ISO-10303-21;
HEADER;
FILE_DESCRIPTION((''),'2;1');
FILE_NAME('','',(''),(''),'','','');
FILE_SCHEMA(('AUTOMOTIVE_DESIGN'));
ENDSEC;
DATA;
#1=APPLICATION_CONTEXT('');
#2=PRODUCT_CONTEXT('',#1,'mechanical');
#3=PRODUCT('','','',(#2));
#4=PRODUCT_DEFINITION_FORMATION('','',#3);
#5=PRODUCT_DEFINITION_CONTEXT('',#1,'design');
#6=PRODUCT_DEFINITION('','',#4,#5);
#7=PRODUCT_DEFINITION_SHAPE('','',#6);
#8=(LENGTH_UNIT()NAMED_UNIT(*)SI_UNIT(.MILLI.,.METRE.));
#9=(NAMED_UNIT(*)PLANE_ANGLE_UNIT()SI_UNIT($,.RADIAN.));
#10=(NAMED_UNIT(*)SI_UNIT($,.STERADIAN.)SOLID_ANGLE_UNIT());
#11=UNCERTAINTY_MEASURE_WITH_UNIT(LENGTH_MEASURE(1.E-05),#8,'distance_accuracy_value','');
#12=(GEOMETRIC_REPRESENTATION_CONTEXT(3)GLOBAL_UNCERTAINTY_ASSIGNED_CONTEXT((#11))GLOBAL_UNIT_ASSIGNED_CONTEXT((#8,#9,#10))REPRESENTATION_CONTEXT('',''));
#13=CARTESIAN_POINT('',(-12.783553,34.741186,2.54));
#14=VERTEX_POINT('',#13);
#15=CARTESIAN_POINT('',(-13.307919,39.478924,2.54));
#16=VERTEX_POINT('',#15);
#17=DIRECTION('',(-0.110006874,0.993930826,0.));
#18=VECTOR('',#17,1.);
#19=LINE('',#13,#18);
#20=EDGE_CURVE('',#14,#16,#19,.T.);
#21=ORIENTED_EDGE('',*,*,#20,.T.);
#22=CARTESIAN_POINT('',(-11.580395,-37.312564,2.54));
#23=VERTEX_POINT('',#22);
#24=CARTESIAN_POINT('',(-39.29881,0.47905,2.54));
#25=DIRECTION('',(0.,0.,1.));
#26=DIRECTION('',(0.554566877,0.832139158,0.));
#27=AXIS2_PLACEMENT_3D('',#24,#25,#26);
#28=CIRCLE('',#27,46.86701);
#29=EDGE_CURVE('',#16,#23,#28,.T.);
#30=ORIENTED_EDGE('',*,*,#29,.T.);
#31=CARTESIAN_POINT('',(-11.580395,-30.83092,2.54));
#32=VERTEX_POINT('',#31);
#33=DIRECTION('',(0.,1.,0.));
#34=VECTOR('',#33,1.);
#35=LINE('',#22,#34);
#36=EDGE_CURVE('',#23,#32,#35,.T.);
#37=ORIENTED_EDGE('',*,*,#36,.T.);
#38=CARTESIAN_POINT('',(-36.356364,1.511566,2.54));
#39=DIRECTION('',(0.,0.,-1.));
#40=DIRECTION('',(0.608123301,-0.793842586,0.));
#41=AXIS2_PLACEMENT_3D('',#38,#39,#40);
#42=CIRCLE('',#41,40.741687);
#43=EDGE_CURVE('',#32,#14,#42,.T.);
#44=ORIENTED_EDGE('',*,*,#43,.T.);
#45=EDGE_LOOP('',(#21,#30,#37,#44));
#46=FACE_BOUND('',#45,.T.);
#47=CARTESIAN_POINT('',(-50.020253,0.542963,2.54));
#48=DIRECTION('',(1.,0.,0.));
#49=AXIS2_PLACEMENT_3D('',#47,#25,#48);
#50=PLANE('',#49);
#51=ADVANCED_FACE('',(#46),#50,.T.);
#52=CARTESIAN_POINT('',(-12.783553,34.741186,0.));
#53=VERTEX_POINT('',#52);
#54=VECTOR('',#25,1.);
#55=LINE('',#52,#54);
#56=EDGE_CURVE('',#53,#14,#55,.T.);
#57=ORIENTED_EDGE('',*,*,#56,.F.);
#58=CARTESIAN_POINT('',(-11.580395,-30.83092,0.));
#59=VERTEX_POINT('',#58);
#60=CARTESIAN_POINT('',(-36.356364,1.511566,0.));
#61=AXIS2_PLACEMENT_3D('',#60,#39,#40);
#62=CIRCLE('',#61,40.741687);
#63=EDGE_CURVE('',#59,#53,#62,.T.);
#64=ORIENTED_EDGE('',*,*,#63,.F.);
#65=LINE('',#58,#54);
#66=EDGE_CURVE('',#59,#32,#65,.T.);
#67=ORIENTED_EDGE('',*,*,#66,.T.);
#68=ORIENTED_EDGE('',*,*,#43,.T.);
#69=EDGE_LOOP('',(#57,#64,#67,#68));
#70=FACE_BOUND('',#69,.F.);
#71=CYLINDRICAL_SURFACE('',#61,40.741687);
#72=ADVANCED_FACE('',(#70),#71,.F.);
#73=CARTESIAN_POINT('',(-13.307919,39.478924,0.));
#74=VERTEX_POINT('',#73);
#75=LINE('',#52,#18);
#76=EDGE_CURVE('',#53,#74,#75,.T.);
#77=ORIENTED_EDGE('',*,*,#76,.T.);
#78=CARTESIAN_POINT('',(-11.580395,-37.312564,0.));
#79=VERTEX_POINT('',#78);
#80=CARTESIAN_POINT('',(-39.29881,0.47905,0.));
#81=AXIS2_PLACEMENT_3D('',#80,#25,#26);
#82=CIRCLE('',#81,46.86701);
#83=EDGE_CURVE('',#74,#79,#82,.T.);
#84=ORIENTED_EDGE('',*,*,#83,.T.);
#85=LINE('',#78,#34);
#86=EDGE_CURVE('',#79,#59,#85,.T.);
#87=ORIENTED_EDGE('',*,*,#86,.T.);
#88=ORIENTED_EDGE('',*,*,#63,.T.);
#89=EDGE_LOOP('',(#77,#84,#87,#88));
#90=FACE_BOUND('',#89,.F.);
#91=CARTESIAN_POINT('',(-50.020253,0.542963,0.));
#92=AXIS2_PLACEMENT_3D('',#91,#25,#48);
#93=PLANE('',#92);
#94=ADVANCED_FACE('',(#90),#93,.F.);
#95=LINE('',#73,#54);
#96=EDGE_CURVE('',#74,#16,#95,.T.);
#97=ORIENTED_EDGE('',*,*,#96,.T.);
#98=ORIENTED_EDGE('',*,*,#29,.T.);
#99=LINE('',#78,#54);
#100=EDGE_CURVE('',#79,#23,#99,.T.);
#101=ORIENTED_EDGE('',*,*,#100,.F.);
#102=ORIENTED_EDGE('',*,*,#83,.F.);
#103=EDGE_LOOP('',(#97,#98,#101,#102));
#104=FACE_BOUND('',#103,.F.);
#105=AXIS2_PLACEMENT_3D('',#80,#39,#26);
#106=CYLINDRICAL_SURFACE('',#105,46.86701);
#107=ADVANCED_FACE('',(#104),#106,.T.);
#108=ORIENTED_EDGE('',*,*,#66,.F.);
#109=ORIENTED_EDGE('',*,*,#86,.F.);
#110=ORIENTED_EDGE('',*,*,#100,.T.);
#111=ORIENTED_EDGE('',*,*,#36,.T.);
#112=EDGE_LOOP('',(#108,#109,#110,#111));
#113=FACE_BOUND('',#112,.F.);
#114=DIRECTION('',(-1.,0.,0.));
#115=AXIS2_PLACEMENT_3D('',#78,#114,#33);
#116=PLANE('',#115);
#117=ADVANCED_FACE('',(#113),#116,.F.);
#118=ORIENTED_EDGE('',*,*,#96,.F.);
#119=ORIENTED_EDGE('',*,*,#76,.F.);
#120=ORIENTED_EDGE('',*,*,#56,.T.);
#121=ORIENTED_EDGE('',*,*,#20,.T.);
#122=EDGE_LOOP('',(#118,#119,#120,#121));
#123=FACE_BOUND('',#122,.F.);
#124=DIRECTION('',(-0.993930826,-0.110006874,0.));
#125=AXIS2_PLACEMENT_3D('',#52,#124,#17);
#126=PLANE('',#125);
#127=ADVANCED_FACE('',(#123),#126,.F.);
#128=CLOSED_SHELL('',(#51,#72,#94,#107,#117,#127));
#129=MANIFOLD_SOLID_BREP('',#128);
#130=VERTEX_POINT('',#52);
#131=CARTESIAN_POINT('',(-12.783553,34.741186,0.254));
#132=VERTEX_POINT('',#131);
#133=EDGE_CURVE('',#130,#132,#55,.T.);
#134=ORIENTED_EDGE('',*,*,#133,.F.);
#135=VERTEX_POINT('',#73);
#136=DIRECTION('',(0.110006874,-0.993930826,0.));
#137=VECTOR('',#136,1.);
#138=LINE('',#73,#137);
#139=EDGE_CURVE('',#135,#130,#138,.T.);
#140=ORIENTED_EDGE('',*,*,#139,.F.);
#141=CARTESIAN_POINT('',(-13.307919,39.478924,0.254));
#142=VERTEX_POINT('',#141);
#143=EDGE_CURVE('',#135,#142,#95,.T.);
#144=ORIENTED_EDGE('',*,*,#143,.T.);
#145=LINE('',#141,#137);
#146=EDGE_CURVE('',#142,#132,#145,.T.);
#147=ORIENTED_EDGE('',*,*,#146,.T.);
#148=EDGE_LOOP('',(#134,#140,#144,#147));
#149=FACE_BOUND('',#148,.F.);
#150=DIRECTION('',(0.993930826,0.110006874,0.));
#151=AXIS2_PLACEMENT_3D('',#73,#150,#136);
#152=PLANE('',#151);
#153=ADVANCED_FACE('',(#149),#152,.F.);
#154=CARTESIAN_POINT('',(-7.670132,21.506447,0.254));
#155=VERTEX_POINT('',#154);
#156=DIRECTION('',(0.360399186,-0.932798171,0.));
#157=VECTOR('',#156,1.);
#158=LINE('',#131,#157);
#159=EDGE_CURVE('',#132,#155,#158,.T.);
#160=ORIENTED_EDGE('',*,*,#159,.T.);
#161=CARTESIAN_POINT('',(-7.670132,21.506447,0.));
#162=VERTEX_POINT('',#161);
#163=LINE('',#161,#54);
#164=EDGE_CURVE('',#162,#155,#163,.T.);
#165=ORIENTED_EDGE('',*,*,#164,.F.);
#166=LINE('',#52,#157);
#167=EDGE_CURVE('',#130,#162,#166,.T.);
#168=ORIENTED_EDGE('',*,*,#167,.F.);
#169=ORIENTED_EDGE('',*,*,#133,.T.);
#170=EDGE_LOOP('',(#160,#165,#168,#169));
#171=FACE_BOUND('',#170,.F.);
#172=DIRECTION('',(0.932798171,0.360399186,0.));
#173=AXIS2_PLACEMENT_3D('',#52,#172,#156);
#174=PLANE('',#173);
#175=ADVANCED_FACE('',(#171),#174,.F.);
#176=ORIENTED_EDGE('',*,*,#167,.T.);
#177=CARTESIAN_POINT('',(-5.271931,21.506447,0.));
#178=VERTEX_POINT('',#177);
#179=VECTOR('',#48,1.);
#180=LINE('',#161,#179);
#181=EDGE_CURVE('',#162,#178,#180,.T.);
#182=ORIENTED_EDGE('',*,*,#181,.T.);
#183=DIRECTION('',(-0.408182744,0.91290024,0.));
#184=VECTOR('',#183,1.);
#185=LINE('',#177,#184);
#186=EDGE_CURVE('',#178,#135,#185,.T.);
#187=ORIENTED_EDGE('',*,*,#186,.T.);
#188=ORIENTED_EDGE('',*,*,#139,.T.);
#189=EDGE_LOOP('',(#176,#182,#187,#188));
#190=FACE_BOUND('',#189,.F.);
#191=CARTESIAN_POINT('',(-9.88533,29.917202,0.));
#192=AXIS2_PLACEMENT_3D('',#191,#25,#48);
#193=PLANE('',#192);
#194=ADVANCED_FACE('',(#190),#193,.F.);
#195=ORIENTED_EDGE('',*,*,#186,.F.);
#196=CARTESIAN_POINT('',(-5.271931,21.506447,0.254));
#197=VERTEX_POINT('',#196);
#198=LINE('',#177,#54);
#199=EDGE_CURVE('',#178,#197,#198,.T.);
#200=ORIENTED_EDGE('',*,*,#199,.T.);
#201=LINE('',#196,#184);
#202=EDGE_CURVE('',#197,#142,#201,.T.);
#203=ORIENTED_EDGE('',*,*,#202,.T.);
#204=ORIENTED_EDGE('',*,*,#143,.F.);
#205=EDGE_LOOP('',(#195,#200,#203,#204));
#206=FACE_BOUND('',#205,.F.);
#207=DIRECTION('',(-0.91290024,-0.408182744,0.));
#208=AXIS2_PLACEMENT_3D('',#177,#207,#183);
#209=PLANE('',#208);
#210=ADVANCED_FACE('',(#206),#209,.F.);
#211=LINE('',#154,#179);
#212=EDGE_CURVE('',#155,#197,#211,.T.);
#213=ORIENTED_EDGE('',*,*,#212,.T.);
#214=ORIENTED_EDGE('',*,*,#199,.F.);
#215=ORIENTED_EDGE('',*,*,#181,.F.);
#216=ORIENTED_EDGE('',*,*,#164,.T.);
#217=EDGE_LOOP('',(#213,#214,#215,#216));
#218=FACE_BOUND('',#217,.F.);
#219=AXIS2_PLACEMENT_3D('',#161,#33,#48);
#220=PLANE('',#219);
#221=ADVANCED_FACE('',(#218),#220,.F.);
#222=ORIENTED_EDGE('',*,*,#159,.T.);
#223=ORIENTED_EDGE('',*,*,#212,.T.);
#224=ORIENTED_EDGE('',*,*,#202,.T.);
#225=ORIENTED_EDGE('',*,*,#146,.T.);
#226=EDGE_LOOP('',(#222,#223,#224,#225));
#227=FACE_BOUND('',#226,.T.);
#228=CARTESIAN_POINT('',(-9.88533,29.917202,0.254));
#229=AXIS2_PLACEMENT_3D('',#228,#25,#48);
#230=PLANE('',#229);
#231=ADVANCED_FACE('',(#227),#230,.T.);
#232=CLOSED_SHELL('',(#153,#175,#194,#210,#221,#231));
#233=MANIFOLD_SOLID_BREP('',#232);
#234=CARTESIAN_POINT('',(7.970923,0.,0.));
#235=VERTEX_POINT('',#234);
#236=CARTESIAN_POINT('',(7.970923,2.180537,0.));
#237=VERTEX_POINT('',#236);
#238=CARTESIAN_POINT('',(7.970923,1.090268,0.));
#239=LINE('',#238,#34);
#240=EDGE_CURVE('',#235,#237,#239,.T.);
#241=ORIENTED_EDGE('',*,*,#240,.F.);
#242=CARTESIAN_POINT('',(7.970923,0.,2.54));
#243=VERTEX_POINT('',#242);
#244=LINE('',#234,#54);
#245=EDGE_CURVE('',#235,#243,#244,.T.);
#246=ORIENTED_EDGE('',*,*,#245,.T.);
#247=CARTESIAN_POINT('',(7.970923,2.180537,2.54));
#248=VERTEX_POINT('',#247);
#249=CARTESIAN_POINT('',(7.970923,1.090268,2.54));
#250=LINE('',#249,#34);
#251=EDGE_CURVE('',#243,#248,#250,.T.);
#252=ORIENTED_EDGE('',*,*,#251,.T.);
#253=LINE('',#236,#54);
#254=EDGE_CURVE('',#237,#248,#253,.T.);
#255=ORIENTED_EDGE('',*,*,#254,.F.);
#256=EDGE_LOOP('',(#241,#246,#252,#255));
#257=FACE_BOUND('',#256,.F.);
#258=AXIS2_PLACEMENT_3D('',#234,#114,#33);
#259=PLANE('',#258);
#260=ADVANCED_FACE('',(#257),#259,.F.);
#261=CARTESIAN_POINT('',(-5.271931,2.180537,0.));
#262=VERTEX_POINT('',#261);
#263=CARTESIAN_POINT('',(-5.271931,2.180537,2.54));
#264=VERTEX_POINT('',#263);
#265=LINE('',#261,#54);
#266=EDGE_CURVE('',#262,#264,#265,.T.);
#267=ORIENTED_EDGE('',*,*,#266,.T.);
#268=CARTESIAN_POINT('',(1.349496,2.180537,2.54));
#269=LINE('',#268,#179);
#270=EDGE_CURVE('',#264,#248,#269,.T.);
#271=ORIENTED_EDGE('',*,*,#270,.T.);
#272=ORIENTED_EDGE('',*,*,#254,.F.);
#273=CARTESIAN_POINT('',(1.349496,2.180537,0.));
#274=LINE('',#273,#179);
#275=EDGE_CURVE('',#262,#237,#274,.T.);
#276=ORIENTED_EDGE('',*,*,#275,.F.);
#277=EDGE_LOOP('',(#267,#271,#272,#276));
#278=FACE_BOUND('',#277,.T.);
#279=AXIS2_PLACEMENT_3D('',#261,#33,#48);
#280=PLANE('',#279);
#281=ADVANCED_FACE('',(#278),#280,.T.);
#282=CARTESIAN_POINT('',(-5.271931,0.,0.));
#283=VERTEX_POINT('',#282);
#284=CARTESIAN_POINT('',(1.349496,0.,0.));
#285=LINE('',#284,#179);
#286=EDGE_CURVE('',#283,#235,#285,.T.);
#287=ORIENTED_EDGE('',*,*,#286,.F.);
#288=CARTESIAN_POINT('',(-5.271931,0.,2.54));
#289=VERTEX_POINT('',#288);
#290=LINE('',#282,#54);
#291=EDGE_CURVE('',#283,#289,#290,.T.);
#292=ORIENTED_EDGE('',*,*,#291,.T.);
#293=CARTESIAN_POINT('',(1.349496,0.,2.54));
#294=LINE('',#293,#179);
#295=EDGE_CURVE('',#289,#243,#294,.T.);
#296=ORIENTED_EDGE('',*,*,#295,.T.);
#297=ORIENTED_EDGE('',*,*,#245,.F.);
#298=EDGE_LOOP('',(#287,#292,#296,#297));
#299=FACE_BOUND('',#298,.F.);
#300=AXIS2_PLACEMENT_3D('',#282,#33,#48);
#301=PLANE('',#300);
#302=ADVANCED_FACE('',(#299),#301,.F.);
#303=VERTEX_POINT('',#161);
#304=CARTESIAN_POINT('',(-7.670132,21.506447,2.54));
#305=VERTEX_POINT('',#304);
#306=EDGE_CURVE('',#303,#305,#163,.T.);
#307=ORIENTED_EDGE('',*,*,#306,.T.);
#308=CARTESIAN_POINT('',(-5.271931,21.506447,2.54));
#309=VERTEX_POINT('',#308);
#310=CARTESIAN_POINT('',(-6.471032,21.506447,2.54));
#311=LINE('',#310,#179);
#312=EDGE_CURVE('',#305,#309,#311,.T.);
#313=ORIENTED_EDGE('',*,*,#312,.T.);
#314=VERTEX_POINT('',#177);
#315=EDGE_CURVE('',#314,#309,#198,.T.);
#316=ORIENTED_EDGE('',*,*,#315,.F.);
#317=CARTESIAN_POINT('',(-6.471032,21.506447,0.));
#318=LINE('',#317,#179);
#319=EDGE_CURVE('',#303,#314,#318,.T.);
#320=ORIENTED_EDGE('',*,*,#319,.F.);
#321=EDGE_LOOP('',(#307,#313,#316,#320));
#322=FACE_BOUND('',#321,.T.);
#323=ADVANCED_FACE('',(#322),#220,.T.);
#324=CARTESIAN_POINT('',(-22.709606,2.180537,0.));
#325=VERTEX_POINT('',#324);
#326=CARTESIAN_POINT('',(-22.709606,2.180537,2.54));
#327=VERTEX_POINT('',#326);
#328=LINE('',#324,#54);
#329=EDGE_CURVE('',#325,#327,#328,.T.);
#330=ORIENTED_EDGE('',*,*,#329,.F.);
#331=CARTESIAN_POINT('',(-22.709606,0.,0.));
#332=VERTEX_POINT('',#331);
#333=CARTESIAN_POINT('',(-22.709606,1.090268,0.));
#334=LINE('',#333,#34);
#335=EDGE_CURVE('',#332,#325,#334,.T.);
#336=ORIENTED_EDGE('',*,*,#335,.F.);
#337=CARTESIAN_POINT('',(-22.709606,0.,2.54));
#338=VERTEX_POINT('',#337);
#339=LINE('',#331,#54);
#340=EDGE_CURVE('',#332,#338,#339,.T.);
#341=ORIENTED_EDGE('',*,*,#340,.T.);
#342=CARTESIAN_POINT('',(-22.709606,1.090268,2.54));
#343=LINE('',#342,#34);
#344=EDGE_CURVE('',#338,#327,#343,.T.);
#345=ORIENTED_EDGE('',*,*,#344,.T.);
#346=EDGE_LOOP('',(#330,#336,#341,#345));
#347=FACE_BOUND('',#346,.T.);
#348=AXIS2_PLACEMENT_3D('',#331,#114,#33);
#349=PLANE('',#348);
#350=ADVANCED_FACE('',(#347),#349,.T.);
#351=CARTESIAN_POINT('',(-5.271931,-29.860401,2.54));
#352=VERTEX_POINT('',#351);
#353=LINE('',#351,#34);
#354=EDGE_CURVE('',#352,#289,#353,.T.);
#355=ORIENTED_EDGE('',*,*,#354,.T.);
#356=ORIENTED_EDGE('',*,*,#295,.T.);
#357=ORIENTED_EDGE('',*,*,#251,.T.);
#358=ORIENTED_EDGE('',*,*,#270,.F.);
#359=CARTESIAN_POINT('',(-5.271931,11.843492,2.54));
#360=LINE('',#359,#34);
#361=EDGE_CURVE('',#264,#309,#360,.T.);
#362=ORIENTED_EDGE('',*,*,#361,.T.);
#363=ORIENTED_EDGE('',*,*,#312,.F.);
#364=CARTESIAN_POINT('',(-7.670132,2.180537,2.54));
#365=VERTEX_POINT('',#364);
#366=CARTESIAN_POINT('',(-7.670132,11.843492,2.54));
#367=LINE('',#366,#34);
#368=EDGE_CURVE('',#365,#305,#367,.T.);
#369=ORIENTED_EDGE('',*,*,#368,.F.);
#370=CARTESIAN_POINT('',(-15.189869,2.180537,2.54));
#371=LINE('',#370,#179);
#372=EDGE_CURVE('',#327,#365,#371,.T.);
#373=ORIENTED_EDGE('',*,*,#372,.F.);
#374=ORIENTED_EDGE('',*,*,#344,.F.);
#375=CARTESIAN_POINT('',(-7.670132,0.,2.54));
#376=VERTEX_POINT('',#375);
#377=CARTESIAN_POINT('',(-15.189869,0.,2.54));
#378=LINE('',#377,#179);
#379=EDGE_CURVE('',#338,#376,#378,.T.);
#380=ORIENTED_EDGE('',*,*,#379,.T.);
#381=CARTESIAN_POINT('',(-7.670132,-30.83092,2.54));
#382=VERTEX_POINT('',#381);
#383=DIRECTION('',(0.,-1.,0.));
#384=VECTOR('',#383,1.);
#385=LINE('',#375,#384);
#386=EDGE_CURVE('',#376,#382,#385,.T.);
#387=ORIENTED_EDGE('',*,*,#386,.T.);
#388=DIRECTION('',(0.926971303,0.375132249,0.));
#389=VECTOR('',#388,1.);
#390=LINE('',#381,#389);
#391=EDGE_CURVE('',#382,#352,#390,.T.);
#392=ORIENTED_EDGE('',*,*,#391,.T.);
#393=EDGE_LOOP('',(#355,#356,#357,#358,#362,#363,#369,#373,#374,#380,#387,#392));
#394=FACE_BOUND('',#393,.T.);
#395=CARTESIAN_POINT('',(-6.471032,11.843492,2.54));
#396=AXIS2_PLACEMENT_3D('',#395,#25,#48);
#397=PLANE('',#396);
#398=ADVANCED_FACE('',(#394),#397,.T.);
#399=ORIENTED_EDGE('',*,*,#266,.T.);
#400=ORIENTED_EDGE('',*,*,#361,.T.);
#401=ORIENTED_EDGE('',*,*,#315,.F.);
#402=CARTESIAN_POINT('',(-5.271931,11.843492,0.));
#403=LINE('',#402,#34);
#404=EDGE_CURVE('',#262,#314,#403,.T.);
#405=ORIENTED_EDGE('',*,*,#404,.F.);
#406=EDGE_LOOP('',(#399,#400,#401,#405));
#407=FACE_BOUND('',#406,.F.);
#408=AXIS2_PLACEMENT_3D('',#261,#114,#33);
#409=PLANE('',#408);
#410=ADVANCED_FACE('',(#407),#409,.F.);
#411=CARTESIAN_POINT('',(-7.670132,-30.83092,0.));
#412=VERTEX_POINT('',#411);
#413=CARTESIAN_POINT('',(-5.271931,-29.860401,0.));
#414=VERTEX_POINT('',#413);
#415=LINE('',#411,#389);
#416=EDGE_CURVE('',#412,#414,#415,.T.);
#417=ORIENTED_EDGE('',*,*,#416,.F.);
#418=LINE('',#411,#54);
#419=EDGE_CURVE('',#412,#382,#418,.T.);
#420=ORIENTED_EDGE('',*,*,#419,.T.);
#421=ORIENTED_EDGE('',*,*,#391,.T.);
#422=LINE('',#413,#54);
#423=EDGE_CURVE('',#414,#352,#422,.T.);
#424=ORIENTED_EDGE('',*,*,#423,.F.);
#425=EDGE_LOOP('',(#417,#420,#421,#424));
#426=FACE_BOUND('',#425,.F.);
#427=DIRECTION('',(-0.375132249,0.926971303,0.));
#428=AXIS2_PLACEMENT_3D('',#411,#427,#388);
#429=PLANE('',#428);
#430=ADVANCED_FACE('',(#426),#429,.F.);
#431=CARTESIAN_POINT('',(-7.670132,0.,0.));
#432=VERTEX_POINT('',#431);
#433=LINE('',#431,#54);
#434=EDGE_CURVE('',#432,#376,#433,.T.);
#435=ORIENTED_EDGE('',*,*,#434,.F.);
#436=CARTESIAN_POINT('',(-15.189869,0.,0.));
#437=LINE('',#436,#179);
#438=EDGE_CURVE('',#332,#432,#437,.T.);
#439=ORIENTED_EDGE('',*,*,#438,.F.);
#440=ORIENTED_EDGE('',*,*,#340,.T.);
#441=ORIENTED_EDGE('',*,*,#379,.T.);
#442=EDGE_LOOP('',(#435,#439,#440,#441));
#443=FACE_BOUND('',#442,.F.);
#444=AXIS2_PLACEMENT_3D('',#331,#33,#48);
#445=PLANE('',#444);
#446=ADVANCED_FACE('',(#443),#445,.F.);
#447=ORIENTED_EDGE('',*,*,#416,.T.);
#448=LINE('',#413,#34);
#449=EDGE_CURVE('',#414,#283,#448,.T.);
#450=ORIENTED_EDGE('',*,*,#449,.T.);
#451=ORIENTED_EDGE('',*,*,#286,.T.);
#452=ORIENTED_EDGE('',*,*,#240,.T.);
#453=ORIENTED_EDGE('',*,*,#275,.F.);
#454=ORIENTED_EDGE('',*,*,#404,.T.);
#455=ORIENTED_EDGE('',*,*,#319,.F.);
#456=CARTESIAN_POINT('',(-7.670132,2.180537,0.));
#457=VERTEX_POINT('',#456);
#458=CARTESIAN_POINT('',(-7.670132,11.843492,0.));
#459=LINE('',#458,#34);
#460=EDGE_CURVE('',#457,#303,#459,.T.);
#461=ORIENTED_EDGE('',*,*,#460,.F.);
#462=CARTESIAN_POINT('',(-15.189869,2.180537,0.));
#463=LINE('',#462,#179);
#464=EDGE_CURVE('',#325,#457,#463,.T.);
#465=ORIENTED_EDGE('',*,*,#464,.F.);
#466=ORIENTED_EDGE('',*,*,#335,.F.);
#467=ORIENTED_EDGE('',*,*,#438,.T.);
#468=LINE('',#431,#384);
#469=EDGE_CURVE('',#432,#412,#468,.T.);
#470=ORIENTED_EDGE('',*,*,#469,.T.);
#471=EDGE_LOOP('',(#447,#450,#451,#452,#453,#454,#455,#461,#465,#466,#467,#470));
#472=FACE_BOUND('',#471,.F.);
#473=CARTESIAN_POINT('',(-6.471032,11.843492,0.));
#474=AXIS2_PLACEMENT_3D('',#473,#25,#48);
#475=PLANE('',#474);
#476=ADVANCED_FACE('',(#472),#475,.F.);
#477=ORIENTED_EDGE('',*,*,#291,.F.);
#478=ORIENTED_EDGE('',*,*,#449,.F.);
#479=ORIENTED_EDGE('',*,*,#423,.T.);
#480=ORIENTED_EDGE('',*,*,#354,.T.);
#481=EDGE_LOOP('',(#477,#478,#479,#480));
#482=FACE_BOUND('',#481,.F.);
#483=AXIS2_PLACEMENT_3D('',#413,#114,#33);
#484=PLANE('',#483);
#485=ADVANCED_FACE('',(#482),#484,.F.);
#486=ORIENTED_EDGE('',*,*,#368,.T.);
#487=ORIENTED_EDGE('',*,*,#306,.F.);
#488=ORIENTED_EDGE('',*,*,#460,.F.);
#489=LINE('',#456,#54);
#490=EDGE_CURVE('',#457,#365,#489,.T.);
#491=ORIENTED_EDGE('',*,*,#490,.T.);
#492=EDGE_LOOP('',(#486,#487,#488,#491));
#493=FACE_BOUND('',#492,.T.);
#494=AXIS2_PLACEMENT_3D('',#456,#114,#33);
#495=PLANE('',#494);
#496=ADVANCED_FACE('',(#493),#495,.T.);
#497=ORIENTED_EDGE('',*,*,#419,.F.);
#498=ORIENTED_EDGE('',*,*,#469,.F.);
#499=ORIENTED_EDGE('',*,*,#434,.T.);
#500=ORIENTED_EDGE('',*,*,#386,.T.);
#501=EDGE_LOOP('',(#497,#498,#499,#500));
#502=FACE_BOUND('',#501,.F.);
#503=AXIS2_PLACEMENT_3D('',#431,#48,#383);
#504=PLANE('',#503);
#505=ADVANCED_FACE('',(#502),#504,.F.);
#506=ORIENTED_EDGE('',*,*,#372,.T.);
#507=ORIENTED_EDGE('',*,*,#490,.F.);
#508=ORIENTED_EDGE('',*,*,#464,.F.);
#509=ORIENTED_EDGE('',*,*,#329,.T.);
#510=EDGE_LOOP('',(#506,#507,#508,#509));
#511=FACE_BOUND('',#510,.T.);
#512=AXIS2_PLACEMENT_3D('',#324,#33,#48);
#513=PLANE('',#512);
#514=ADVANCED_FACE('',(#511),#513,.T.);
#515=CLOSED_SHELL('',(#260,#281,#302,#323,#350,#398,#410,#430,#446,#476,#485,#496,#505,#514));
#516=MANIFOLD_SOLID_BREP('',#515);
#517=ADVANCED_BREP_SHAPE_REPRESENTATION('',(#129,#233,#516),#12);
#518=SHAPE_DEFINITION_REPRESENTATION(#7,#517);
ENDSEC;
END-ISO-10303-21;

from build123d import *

# Parameters (mm, degrees)
F1_DEPTH = 2.54
F0_W     = 2.3982011194
F0_H     = 19.3259103689
F0_W_2   = 15.039473772
F0_H_2   = 2.1805369761
F0_W_3   = 13.2428539504
F2_DEPTH = 0.254


with BuildPart() as f1:
    # F0 (on Top) → F1 (new body)
    with BuildSketch(Plane.XY):
        with BuildLine():
            ThreePointArc((-11.580394581, -30.8309197426), (-77.0911936393, 0.7641380252), (-12.78355252, 34.7411856055))
            Line((-12.78355252, 34.7411856055), (-13.3079187945, 39.4789241254))
            ThreePointArc((-13.3079187945, 39.4789241254), (-86.1539650826, -0.5750175297), (-11.580394581, -37.3125635087))
            Line((-11.580394581, -37.3125635087), (-11.580394581, -30.8309197426))
        make_face()
    extrude(amount=F1_DEPTH)


with BuildPart() as f1b:
    # F0 (on Top) → F1, piece 2 (new body)
    with BuildSketch(Plane.XY):
        with Locations((-6.4710318836, 11.8434921606)):
            Rectangle(F0_W, F0_H)
        Polygon((-7.6701324433, 0), (-7.6701324433, -30.8309197426), (-5.2719313239, -29.8604014784), (-5.2719313239, 0), align=None)
        with Locations((-15.1898693293, 1.090268488)):
            Rectangle(F0_W_2, F0_H_2)
        with Locations((1.3494956513, 1.090268488)):
            Rectangle(F0_W_3, F0_H_2)
        with Locations((-6.4710318836, 1.090268488)):
            Rectangle(F0_W, F0_H_2)
    extrude(amount=F1_DEPTH)


with BuildPart() as f2:
    # F0 (on Top) → F2 (new body)
    with BuildSketch(Plane.XY):
        Polygon((-13.3079187945, 39.4789241254), (-12.78355252, 34.7411856055), (-7.6701324433, 21.506447345), (-5.2719313239, 21.506447345), align=None)
    extrude(amount=F2_DEPTH)


solid = Compound([f1.part, f1b.part, f2.part])
